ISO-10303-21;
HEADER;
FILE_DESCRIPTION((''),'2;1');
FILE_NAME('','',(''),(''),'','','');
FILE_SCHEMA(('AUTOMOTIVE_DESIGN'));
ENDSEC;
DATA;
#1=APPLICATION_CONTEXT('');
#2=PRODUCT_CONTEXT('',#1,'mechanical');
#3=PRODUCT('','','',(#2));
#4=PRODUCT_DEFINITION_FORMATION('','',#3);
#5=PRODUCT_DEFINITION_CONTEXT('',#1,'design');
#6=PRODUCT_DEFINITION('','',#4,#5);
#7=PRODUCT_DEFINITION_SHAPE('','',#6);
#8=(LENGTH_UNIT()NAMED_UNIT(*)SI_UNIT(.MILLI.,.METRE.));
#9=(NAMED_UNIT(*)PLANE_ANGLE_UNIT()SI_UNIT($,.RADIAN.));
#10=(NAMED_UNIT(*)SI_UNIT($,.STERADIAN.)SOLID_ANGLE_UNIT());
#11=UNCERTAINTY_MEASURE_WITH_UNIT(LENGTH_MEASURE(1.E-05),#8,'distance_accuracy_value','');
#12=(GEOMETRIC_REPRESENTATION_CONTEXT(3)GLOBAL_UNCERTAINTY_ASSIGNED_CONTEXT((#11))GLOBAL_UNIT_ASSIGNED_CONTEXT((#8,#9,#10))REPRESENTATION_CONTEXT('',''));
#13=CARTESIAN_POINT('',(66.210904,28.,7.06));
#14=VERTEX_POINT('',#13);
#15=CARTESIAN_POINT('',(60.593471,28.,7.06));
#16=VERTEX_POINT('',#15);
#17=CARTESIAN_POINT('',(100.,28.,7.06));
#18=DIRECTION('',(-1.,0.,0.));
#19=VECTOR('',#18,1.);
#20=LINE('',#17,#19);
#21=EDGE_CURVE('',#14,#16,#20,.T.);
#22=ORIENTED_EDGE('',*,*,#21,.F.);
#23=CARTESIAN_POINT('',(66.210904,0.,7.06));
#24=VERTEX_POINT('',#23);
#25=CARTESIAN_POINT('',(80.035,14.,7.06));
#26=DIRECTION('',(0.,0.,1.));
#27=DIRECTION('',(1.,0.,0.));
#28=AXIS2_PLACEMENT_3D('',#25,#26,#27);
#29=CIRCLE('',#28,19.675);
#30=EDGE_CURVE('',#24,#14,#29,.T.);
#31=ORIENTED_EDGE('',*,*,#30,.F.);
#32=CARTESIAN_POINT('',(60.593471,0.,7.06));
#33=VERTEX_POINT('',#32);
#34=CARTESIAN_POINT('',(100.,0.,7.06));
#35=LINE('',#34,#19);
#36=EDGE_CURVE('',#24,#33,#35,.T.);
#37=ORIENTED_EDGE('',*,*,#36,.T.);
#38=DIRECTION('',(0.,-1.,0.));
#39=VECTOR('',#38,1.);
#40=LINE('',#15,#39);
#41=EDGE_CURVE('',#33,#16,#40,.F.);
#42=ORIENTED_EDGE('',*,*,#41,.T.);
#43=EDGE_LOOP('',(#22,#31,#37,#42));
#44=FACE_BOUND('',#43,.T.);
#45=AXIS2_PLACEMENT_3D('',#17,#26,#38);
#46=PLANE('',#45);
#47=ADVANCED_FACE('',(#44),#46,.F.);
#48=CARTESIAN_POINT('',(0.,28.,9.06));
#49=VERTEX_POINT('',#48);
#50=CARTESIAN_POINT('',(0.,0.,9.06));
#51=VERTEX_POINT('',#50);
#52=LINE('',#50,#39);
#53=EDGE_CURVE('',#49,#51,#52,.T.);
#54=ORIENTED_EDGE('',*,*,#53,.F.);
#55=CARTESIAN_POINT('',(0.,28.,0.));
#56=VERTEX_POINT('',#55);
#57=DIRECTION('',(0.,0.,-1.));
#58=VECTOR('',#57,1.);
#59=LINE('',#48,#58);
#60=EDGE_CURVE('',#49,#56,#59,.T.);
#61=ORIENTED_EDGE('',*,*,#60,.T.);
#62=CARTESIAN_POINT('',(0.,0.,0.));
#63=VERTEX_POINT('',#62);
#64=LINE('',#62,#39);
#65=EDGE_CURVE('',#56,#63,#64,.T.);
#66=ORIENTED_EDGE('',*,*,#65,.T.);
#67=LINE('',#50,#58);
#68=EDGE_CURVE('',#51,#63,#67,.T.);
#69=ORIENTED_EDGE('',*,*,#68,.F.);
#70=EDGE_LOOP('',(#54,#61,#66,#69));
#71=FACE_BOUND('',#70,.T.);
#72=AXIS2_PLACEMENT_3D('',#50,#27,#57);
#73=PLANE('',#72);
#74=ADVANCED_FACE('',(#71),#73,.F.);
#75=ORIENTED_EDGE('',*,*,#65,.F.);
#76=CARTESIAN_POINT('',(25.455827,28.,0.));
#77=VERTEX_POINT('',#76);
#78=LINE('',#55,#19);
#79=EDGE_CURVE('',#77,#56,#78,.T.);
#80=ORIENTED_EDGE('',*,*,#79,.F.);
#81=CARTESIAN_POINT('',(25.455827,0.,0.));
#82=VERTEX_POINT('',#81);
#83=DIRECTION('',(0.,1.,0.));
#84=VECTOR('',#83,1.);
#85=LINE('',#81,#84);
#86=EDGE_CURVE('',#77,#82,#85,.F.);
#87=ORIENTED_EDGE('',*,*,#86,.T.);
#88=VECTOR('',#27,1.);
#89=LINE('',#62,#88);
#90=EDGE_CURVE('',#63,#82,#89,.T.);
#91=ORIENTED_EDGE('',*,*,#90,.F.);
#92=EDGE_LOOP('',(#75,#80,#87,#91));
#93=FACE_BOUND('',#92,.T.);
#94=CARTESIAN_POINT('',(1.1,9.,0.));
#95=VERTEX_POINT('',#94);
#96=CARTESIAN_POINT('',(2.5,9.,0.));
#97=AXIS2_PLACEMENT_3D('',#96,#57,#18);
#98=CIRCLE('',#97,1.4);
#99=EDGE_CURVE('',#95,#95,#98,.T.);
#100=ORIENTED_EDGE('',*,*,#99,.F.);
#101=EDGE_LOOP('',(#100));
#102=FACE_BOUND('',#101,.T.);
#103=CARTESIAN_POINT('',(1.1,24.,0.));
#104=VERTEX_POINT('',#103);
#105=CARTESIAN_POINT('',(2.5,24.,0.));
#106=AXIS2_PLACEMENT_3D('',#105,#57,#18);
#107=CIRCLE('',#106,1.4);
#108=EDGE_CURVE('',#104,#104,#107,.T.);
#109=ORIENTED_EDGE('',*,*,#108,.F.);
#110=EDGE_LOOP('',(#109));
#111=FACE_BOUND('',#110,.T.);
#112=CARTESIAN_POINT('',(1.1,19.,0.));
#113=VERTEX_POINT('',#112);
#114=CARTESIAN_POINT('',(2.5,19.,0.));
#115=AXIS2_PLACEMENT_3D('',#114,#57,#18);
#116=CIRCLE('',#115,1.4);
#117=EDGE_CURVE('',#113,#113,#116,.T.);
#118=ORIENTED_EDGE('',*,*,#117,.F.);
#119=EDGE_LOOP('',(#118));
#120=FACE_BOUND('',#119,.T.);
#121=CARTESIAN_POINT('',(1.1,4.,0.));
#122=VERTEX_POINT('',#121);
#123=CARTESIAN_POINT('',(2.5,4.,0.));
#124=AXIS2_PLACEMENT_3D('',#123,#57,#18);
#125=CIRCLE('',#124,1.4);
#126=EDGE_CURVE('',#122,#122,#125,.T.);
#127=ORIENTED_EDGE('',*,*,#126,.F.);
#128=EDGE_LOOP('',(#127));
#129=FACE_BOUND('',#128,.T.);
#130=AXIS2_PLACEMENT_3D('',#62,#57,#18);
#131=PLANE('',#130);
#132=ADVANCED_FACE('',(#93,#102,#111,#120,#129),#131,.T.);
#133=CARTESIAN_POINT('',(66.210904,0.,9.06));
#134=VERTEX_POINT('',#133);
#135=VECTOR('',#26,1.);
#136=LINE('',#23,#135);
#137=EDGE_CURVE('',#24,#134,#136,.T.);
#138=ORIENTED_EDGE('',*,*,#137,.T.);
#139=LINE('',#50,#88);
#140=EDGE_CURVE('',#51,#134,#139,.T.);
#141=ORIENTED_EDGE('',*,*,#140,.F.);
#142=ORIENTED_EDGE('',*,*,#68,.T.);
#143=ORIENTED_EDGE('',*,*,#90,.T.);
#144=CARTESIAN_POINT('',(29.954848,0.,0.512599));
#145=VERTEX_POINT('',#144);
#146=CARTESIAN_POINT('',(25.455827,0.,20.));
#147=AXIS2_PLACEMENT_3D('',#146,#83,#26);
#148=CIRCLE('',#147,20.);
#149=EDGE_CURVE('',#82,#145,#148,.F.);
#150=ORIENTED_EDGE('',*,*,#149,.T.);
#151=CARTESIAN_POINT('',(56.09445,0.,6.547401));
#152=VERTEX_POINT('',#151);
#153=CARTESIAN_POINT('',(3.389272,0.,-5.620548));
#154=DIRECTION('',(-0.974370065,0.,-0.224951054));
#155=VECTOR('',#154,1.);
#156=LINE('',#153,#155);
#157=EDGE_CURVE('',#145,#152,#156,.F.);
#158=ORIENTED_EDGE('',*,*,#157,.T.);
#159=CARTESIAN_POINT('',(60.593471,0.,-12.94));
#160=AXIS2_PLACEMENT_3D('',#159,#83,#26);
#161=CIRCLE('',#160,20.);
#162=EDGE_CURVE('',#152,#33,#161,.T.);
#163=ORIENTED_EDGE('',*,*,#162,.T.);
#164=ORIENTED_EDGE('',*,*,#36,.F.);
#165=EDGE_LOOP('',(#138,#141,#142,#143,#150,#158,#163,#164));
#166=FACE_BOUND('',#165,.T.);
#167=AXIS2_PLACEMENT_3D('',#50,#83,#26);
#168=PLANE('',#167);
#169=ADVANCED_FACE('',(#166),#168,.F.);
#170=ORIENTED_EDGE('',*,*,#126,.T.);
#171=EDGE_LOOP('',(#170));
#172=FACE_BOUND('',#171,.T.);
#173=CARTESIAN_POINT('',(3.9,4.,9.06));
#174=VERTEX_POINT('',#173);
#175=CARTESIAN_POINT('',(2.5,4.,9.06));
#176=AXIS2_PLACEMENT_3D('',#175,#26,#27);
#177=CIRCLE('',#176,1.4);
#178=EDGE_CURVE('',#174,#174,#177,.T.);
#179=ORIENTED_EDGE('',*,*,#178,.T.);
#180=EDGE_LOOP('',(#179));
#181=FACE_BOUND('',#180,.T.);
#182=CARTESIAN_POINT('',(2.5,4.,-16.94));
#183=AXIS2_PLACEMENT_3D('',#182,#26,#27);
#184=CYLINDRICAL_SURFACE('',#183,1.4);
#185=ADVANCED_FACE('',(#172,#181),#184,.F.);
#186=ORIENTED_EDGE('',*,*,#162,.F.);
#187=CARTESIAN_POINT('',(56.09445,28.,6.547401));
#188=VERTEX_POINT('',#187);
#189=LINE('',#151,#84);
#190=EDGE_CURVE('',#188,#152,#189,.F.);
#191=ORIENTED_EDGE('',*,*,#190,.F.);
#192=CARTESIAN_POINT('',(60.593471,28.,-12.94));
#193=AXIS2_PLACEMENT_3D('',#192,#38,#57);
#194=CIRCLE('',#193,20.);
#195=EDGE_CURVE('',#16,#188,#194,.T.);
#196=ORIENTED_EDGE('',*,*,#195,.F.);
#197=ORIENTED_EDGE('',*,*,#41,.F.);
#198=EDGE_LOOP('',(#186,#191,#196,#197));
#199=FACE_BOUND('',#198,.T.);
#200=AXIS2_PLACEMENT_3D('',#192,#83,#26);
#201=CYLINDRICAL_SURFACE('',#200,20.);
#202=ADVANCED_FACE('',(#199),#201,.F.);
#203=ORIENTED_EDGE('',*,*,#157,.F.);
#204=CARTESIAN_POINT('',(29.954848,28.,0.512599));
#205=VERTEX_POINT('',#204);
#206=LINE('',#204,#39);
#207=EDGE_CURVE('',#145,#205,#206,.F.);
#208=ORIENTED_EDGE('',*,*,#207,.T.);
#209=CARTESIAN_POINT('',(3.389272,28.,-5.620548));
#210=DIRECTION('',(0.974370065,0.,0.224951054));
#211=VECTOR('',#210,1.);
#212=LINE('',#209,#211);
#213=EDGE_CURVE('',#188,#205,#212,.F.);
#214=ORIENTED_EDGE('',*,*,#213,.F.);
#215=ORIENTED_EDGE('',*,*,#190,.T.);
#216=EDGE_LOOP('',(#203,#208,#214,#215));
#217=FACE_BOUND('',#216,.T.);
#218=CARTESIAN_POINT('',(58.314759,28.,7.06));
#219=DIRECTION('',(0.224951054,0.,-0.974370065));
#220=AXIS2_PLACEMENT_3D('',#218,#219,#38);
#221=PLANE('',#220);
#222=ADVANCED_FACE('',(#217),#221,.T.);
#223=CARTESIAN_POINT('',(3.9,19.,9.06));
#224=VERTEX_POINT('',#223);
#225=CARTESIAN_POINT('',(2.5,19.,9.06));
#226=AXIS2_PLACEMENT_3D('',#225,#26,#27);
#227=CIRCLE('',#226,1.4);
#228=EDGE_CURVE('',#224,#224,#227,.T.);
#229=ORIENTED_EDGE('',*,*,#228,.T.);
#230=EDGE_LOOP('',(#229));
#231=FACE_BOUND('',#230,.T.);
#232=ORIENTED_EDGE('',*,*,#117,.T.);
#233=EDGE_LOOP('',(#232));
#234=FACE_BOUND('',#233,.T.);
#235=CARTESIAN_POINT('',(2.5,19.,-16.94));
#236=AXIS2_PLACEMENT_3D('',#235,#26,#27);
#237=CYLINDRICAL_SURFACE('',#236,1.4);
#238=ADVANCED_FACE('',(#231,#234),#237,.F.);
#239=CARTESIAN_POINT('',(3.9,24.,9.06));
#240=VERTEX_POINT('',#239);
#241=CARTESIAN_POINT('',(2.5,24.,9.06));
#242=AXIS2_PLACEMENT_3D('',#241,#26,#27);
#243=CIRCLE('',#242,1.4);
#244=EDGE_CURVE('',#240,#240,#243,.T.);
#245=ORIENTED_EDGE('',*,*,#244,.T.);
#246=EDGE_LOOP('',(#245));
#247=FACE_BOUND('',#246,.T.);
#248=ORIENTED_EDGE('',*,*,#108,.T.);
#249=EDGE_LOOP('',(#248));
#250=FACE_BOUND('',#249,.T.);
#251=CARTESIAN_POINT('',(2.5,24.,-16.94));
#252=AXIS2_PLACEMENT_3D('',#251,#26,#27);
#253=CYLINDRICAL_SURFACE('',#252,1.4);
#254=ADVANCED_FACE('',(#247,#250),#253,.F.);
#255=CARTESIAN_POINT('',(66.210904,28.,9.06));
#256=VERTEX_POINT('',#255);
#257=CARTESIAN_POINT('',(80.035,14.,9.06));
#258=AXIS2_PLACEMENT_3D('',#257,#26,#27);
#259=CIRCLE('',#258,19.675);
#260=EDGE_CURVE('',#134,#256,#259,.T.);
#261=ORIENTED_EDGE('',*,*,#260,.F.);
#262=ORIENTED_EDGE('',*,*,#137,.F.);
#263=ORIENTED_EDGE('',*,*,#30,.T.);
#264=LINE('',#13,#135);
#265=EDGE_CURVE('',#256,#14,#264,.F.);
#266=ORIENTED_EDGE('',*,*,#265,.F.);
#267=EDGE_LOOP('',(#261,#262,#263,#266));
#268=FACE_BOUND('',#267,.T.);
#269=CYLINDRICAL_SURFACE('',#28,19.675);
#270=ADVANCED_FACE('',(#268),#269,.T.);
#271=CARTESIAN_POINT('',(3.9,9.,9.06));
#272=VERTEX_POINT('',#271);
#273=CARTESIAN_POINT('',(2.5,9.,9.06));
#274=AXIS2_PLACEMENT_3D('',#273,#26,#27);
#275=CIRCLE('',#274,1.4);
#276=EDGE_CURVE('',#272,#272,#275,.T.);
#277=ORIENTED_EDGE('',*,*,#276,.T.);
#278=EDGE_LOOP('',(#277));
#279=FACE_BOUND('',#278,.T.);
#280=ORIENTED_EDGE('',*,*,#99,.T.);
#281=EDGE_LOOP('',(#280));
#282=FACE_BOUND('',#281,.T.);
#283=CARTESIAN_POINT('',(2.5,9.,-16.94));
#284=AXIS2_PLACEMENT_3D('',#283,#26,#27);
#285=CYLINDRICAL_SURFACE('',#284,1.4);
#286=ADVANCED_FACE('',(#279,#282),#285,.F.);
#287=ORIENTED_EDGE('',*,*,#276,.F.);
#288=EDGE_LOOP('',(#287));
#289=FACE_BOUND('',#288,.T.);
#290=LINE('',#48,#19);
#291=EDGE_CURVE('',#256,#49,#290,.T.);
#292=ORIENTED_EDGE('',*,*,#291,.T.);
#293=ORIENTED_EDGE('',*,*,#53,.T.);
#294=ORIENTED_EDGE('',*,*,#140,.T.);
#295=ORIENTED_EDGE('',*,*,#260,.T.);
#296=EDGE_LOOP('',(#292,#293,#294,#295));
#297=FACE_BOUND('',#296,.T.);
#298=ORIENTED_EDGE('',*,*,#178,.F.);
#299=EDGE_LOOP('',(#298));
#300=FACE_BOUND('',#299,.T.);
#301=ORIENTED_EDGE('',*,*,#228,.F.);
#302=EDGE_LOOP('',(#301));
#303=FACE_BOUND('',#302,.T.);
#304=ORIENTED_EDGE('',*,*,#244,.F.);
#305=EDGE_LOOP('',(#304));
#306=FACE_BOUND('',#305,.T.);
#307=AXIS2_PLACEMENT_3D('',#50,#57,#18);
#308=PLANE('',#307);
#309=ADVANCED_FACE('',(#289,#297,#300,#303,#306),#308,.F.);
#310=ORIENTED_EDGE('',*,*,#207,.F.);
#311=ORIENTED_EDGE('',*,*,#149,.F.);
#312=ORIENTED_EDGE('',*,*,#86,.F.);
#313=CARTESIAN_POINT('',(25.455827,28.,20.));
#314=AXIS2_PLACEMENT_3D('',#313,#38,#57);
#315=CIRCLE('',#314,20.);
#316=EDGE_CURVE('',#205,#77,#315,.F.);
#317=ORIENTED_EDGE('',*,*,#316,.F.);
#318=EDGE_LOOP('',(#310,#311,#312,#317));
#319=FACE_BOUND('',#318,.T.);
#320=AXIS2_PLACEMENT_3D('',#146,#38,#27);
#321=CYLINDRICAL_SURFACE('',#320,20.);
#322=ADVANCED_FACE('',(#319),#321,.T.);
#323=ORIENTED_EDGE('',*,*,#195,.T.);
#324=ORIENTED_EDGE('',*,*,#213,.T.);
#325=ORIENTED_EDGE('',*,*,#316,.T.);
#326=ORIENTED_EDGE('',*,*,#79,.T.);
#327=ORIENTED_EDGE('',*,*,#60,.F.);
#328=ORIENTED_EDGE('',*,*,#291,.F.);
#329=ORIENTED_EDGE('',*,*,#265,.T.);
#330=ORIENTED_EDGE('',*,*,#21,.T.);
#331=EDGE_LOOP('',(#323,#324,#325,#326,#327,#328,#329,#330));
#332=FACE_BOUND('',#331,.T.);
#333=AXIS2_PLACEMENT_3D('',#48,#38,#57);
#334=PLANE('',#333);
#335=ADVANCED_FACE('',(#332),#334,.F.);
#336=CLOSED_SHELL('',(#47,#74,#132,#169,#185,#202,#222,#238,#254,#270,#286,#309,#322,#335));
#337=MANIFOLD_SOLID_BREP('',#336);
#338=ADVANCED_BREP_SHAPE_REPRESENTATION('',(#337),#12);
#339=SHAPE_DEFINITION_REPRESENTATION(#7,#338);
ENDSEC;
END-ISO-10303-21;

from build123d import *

# Parameters (mm, degrees)
SKETCH1_W           = 15
SKETCH1_H           = 28
BOSS_EXTRUDE1_DEPTH = 9.06
SKETCH2_R           = 1.4
CUT_EXTRUDE1_DEPTH  = 26
SKETCH3_W           = 2
SKETCH3_H           = 28
BOSS_EXTRUDE2_DEPTH = 85
CHAMFER1_SIZE       = 10
CHAMFER1_SIZE_2     = 43.314758743
SKETCH4_R           = 19.675
BOSS_EXTRUDE3_DEPTH = 2
CUT_EXTRUDE3_START  = -2
CUT_EXTRUDE3_DEPTH  = 2
FILLET1_R           = 20


with BuildPart() as part:
    # Sketch1 → Boss-Extrude1 (new body)
    with BuildSketch(Plane.XY):
        with Locations((7.5, 14)):
            Rectangle(SKETCH1_W, SKETCH1_H)
    extrude(amount=BOSS_EXTRUDE1_DEPTH)

    # Sketch2 → Cut-Extrude1 (cut)
    with BuildSketch(Plane.XY.offset(9.06)):
        with Locations((2.5, 24)):
            Circle(SKETCH2_R)
        with Locations((2.5, 19)):
            Circle(SKETCH2_R)
        with Locations((2.5, 9)):
            Circle(SKETCH2_R)
        with Locations((2.5, 4)):
            Circle(SKETCH2_R)
    extrude(amount=-CUT_EXTRUDE1_DEPTH, mode=Mode.SUBTRACT)

    # Sketch3 → Boss-Extrude2 (add)
    with BuildSketch(Plane(origin=(15, 0, 0), x_dir=(0, 0, -1), z_dir=(1, 0, 0))):
        with Locations((-8.06, 14)):
            Rectangle(SKETCH3_W, SKETCH3_H)
    extrude(amount=BOSS_EXTRUDE2_DEPTH)

    # Chamfer1
    # the kernel refuses this chamfer: 43.314758743, 10 mm, written as the material it adds along each edge
    with BuildSketch(Plane(origin=(15, 28, 7.06), x_dir=(-0.16038219639928503, 0, -0.9870549888826565), z_dir=(0, -1, 0))) as chamfer1_piece_1_section:
        Polygon((CHAMFER1_SIZE * 0.987054988883, CHAMFER1_SIZE * 0.160382196399), (-CHAMFER1_SIZE_2 * 0.160382196399, CHAMFER1_SIZE_2 * 0.987054988879), (0, 0), align=None)
    chamfer1_piece_1 = extrude(amount=28, mode=Mode.PRIVATE)
    chamfer1_piece_1 = split(chamfer1_piece_1, bisect_by=Plane(origin=(31.447908445, 14, 0), z_dir=(0, 0, 1)), keep=Keep.TOP, mode=Mode.PRIVATE)
    add(chamfer1_piece_1)

    # Sketch4 → Boss-Extrude3 (add)
    with BuildSketch(Plane.XY.offset(9.06)):
        with Locations((80.035, 14)):
            Circle(SKETCH4_R)
    extrude(amount=-BOSS_EXTRUDE3_DEPTH)

    # Sketch5 → Cut-Extrude3 (cut)
    with BuildSketch(Plane(origin=(0, 0, 7.06), x_dir=(-1, 0, 0), z_dir=(0, 0, -1)).offset(CUT_EXTRUDE3_START)):
        with BuildLine():
            ThreePointArc((-93.859095811, 0), (-99.71, 14), (-93.859095811, 28))
            Line((-93.859095811, 28), (-100, 28))
            Line((-100, 28), (-100, 0))
            Line((-100, 0), (-93.859095811, 0))
        make_face()
    extrude(amount=CUT_EXTRUDE3_DEPTH, mode=Mode.SUBTRACT)

    # Fillet1
    fillet1_edges = [part.edges().sort_by_distance(p)[0] for p in [
        (58.314758743, 14, 7.06),
        (27.73453907, 14, 0),
    ]]
    fillet(fillet1_edges, radius=FILLET1_R)


solid = part.part
